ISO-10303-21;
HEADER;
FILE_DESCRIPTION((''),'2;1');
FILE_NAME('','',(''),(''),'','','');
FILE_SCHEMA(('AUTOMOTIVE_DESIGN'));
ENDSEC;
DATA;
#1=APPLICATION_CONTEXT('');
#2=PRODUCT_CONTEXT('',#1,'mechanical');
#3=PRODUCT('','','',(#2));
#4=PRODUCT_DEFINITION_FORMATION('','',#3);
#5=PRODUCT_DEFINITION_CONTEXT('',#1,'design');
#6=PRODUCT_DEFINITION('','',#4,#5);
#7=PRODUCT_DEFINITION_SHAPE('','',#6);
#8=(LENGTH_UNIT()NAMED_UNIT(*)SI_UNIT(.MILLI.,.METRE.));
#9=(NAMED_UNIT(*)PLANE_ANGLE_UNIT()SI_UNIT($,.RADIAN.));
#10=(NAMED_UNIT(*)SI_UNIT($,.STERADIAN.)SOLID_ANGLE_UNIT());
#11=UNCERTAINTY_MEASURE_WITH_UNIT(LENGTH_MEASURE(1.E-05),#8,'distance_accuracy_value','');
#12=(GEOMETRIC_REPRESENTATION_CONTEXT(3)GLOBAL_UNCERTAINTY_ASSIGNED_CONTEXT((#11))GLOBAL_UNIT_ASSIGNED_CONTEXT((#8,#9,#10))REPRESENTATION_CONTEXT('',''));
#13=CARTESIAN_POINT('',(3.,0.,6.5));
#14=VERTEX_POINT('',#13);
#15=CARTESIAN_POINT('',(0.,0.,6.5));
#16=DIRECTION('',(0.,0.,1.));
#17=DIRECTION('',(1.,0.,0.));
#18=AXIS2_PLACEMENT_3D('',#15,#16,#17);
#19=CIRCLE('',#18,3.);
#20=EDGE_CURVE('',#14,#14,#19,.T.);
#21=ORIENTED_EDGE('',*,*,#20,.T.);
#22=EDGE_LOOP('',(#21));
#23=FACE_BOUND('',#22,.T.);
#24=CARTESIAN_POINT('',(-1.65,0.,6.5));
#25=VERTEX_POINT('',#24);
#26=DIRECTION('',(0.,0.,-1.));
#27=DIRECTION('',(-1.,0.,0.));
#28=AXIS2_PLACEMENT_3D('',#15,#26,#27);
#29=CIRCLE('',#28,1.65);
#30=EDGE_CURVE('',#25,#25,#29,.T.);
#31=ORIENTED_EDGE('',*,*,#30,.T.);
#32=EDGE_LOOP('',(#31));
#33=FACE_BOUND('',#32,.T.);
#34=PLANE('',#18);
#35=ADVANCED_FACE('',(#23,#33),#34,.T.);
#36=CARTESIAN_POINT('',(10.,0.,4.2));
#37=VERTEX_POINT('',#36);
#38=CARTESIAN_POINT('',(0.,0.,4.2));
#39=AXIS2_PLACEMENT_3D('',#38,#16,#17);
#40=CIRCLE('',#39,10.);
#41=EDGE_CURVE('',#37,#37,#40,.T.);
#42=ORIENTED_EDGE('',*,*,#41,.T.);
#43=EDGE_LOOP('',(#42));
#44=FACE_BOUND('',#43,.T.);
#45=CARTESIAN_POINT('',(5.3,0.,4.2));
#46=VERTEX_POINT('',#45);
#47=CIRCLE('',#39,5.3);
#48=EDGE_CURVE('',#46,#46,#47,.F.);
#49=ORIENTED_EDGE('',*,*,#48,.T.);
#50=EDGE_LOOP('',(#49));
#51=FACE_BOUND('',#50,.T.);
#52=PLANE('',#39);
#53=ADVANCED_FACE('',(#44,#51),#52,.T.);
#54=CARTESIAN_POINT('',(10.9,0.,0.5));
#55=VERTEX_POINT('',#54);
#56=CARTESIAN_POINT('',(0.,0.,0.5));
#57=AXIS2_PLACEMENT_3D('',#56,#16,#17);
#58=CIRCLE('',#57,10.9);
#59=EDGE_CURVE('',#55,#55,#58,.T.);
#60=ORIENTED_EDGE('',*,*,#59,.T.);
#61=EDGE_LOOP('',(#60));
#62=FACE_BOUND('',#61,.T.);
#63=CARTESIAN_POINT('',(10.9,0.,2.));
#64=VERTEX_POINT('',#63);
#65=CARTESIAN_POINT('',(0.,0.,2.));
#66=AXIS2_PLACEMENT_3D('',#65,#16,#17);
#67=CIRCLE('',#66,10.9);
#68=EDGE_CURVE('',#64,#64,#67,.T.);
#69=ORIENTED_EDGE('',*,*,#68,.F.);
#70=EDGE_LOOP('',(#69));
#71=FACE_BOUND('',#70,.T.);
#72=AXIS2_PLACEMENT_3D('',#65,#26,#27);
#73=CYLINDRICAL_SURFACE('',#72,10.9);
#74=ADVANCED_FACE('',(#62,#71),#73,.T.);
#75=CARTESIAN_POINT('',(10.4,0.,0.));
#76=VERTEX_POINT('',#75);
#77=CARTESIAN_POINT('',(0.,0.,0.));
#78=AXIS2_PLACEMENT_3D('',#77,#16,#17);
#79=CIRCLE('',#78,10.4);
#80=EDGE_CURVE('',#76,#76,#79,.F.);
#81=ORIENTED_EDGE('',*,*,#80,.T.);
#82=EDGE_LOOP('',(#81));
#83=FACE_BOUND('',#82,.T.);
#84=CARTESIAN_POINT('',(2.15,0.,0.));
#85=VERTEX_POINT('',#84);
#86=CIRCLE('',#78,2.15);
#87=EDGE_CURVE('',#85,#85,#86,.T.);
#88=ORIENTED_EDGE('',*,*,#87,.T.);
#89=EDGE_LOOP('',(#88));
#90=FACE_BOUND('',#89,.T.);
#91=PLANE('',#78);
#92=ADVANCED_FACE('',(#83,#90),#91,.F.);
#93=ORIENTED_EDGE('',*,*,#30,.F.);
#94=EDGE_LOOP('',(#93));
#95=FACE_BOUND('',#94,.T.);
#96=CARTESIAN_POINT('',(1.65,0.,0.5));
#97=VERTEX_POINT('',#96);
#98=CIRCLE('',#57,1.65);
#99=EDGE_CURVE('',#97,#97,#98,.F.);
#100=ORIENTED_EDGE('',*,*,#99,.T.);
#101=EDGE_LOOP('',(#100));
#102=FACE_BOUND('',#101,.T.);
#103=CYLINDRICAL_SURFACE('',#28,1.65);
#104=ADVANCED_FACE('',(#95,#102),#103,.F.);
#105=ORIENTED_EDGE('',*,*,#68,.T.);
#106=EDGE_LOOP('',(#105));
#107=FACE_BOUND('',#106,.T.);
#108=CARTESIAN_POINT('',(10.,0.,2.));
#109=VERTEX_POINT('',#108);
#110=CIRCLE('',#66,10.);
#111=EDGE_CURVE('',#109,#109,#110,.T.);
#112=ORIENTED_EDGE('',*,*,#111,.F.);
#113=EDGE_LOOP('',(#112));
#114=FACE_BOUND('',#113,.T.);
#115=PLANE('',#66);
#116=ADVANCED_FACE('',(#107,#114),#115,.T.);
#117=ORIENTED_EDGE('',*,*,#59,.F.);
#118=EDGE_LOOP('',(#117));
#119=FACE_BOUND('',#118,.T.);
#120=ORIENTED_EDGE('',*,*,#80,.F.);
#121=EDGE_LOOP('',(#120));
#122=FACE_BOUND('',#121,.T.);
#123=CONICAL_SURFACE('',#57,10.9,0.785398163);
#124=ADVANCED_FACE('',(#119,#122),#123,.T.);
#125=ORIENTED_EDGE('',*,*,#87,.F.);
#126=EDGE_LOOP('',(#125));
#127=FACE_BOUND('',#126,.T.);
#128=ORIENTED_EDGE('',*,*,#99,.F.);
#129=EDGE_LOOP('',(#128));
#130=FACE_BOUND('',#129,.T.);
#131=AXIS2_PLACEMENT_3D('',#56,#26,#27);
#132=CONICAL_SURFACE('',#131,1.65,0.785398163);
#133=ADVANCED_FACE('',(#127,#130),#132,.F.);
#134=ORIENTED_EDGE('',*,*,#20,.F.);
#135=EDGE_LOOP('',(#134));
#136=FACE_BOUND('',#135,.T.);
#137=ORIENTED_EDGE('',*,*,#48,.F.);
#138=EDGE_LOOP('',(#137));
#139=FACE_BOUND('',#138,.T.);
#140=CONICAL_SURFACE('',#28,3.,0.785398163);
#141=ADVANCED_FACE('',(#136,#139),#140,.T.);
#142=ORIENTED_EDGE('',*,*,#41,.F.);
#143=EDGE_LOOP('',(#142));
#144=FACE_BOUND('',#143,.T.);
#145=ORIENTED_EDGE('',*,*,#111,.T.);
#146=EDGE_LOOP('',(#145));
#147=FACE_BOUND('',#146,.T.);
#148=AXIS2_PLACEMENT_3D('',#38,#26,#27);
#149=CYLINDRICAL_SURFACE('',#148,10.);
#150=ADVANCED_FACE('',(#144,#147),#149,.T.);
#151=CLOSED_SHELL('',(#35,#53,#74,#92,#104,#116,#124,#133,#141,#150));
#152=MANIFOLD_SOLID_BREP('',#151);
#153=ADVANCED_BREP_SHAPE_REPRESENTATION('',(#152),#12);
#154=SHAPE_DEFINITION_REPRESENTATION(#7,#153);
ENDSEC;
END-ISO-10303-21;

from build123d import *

# Parameters (mm, degrees)
SKETCH1_R           = 10.9
BOSS_EXTRUDE1_DEPTH = 2
SKETCH2_R           = 10
BOSS_EXTRUDE2_DEPTH = 2.2
SKETCH4_R           = 3
BOSS_EXTRUDE3_DEPTH = 2.3
SKETCH3_R           = 1.65
CUT_EXTRUDE1_DEPTH  = 17.729315587
CHAMFER1_SIZE       = 2.3
CHAMFER2_SIZE       = 0.5
CHAMFER3_SIZE       = 0.5


with BuildPart() as part:
    # Sketch1 → Boss-Extrude1 (new body)
    with BuildSketch(Plane.XY):
        Circle(SKETCH1_R)
    extrude(amount=BOSS_EXTRUDE1_DEPTH)

    # Sketch2 → Boss-Extrude2 (add)
    with BuildSketch(Plane.XY.offset(2)):
        Circle(SKETCH2_R)
    extrude(amount=BOSS_EXTRUDE2_DEPTH)

    # Sketch4 → Boss-Extrude3 (add)
    with BuildSketch(Plane.XY.offset(4.2)):
        Circle(SKETCH4_R)
    extrude(amount=BOSS_EXTRUDE3_DEPTH)

    # Sketch3 → Cut-Extrude1 (cut, through all)
    with BuildSketch(Plane(origin=(0, 0, 0), x_dir=(-1, 0, 0), z_dir=(0, 0, -1))):
        Circle(SKETCH3_R)
    extrude(amount=-CUT_EXTRUDE1_DEPTH, mode=Mode.SUBTRACT)

    # Chamfer1
    chamfer1_edges = [part.edges().sort_by_distance(p)[0] for p in [
        (-3, 0, 4.2),
    ]]
    chamfer(chamfer1_edges, length=CHAMFER1_SIZE - 0.0001)  # a hair under: the kernel refuses the full size

    # Chamfer2
    chamfer2_edges = [part.edges().sort_by_distance(p)[0] for p in [
        (1.65, 0, 0),
    ]]
    chamfer(chamfer2_edges, length=CHAMFER2_SIZE)

    # Chamfer3
    chamfer3_edges = [part.edges().sort_by_distance(p)[0] for p in [
        (-10.9, 0, 0),
    ]]
    chamfer(chamfer3_edges, length=CHAMFER3_SIZE)


solid = part.part
